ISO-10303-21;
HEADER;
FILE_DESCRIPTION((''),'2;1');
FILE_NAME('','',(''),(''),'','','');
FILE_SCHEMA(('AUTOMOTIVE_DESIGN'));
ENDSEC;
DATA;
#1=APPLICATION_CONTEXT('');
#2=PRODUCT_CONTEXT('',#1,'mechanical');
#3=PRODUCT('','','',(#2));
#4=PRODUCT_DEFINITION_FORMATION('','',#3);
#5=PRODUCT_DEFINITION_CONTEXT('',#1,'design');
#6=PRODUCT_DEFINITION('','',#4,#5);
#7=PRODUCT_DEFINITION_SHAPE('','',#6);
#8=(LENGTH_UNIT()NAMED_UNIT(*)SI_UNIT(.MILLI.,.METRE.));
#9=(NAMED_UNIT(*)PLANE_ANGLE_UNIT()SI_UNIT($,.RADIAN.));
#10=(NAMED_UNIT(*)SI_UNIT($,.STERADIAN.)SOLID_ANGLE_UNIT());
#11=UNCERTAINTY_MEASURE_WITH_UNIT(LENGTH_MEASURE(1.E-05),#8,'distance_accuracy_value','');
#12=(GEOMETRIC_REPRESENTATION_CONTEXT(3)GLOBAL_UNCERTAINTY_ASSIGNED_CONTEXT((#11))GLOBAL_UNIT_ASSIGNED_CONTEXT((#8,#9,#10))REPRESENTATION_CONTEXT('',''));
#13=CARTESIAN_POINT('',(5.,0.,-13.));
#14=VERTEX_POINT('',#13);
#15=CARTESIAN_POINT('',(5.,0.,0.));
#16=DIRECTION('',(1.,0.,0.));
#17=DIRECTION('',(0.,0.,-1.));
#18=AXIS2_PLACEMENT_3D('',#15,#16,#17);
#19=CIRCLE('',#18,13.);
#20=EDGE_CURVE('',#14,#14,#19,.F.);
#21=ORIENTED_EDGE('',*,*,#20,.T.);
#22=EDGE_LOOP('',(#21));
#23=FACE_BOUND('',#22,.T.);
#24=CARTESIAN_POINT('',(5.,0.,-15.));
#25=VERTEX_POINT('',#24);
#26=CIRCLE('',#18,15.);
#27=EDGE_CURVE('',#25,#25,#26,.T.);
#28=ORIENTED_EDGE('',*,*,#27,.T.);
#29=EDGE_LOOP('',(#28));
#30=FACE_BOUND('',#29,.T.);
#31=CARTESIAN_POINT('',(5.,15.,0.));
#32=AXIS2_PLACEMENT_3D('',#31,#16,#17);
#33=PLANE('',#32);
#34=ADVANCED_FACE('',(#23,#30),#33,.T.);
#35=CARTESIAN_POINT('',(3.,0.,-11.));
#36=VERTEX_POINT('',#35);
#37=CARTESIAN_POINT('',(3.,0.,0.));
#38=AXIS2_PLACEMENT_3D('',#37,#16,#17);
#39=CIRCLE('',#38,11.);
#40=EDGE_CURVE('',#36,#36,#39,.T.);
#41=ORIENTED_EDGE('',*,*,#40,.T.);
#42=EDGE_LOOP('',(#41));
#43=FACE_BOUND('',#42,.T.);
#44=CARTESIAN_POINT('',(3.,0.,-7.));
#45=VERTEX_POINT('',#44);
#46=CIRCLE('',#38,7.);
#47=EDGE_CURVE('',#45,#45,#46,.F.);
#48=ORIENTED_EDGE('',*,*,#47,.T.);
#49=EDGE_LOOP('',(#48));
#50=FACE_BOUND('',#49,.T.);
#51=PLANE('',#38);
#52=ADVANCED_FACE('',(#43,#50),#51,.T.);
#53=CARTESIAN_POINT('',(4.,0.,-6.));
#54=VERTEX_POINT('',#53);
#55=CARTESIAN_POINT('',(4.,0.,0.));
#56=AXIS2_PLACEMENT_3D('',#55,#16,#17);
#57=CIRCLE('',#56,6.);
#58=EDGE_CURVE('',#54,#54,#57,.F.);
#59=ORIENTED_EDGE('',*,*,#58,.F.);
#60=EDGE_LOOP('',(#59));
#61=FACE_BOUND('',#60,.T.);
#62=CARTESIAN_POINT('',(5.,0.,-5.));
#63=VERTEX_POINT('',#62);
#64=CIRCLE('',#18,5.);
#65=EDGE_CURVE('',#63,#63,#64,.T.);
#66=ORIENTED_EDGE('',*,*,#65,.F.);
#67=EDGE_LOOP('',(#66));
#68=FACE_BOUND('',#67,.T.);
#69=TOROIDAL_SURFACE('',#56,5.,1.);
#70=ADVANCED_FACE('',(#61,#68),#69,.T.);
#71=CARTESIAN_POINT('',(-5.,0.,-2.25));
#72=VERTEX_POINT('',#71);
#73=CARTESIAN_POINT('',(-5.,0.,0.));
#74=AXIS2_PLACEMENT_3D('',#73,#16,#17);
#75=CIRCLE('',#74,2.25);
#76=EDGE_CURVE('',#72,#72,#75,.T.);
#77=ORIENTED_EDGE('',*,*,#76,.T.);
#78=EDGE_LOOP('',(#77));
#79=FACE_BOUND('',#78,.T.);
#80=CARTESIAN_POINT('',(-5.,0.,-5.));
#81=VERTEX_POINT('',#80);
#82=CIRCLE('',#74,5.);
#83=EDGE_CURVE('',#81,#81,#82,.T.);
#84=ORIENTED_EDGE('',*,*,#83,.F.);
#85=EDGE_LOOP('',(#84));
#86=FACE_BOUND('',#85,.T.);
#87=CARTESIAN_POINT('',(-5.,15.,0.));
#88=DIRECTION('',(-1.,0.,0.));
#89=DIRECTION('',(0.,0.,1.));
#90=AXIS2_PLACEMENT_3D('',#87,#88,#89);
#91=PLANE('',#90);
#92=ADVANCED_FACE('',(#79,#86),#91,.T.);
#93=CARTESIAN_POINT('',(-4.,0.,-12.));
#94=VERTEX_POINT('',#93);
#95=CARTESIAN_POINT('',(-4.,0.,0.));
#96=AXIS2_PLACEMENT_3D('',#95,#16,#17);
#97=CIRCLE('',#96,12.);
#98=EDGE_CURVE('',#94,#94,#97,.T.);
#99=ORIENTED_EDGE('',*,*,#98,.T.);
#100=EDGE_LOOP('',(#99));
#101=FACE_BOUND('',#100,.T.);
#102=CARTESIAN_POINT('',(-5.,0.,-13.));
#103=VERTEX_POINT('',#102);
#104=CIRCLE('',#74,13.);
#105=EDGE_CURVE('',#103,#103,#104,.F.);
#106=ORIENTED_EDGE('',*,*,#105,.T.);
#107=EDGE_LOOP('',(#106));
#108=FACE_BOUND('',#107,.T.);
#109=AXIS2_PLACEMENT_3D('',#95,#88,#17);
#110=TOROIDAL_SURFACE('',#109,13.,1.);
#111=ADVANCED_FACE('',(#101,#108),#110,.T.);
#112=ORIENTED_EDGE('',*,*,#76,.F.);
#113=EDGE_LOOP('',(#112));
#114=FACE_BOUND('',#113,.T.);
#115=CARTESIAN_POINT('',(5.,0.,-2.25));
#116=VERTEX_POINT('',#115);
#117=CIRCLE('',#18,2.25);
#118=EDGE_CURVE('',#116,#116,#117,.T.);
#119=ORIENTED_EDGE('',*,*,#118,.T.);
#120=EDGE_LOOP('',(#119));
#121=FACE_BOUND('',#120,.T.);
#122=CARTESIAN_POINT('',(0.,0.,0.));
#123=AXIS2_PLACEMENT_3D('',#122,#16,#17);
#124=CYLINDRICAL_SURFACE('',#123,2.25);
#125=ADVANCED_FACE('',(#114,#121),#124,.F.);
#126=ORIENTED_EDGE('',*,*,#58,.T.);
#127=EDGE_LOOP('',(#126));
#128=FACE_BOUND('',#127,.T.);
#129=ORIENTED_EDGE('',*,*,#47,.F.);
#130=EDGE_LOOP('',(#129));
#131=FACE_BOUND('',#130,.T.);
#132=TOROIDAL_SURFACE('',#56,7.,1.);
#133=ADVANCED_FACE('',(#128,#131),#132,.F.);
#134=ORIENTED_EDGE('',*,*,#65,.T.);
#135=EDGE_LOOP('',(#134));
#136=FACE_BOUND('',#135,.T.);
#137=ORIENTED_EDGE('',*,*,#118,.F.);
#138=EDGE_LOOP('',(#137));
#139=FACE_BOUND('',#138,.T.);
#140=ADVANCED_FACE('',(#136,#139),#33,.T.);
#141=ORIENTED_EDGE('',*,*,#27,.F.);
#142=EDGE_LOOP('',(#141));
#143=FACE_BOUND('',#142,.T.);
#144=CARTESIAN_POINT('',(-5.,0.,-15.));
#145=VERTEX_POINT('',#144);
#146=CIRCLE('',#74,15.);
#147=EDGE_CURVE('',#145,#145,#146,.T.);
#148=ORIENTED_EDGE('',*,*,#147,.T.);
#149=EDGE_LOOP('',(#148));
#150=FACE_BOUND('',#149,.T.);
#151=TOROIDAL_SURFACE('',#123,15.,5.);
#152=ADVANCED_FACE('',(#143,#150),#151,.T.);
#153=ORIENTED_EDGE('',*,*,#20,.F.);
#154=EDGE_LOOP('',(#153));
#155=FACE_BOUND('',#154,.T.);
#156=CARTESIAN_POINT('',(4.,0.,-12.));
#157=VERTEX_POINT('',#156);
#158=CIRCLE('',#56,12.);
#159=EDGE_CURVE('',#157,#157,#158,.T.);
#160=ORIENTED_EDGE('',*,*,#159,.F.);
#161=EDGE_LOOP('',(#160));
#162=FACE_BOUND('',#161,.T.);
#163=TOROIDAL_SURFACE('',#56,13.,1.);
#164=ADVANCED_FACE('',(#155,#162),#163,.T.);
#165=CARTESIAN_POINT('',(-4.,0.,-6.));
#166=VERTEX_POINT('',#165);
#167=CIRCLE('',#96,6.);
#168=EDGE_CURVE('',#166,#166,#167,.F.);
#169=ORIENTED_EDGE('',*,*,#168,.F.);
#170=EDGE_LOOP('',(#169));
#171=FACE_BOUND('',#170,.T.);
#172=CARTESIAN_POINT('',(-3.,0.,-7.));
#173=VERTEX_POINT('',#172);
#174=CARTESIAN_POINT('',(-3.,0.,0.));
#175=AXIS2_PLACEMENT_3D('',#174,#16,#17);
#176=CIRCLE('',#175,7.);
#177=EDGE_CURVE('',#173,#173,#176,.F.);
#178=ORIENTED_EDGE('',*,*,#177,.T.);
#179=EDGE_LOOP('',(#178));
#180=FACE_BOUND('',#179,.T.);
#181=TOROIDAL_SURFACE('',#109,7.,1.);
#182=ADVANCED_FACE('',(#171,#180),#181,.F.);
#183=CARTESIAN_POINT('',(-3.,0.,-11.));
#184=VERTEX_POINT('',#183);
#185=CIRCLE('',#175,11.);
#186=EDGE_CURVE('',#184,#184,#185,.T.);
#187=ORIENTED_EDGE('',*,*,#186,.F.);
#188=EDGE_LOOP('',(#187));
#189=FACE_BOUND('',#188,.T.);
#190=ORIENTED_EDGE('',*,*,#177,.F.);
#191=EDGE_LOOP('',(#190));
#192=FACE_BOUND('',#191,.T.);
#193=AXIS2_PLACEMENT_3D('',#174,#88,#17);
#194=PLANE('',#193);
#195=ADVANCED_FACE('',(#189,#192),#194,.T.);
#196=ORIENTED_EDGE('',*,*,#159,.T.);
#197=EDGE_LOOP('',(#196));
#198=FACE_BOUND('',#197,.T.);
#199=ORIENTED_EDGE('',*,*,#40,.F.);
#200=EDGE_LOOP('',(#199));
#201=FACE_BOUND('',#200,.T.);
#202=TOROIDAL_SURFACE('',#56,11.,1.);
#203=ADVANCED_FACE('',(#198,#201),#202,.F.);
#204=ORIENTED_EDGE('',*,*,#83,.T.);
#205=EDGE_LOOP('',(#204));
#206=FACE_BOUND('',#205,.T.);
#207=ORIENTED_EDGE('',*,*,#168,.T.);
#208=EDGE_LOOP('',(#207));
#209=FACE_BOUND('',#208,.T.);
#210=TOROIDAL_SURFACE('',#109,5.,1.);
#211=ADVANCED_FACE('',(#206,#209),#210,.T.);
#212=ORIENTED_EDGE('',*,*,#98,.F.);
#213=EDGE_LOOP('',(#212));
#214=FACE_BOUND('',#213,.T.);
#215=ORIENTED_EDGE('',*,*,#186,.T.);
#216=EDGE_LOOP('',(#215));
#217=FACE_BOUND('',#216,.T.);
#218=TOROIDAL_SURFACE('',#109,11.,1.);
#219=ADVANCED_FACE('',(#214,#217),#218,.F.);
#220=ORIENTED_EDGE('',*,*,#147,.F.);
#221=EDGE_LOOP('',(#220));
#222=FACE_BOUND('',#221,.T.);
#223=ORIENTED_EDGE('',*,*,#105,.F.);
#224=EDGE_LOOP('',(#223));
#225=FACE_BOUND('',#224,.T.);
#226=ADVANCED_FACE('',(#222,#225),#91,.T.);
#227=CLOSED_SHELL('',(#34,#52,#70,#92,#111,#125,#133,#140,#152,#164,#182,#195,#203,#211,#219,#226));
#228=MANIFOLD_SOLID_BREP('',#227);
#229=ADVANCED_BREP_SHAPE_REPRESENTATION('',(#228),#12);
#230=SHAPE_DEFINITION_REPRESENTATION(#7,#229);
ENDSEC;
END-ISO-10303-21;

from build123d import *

# Parameters (mm, degrees)
SKETCH2_R            = 12
SKETCH2_R_2          = 6
CUT_EXTRUDE1_DEPTH   = 2
FILLET3_R            = 1
FILLET3_OF_MIRROR2_R = 1


with BuildPart() as part:
    # Sketch1 → Revolve1 (revolve)
    with BuildSketch(Plane.XY, mode=Mode.PRIVATE) as revolve1_sk:
        with BuildLine():
            Line((-5, 15), (-5, 2.25))
            Line((-5, 2.25), (5, 2.25))
            Line((5, 2.25), (5, 15))
            ThreePointArc((5, 15), (0, 20), (-5, 15))
        make_face()
    revolve(revolve1_sk.sketch.rotate(Axis((0, 0, 0), (-1, 0, 0)), 90), axis=Axis((0, 0, 0), (-1, 0, 0)))

    # Sketch2 → Cut-Extrude1 (cut)
    with BuildSketch(Plane(origin=(5, 0, 0), x_dir=(0, 0, -1), z_dir=(1, 0, 0))):
        Circle(SKETCH2_R)
        Circle(SKETCH2_R_2, mode=Mode.SUBTRACT)
    cut_extrude1 = extrude(amount=-CUT_EXTRUDE1_DEPTH, mode=Mode.SUBTRACT)

    # Fillet3
    fillet3_edges = [part.edges().sort_by_distance(p)[0] for p in [
        (3, 0, 12),
        (3, 0, 6),
    ]]
    fillet(fillet3_edges, radius=FILLET3_R)
    fillet3_2_edges = [part.edges().sort_by_distance(p)[0] for p in [
        (5, 0, 12),
        (5, 0, 6),
    ]]
    fillet(fillet3_2_edges, radius=FILLET3_R - 0.0001)  # a hair under: the kernel refuses the full size

    # Mirror2: Cut-Extrude1 across plane
    add(cut_extrude1.mirror(Plane(origin=(0, 0, 0), x_dir=(0, 0, 1), z_dir=(1, 0, 0))), mode=Mode.SUBTRACT)

    # Fillet3 of Mirror2
    fillet3_of_mirror2_edges = [part.edges().sort_by_distance(p)[0] for p in [
        (-3, 0, 12),
        (-3, 0, 6),
    ]]
    fillet(fillet3_of_mirror2_edges, radius=FILLET3_OF_MIRROR2_R)
    fillet3_of_mirror2_2_edges = [part.edges().sort_by_distance(p)[0] for p in [
        (-5, 0, 12),
        (-5, 0, 6),
    ]]
    fillet(fillet3_of_mirror2_2_edges, radius=FILLET3_OF_MIRROR2_R - 0.0001)  # a hair under: the kernel refuses the full size


solid = part.part
